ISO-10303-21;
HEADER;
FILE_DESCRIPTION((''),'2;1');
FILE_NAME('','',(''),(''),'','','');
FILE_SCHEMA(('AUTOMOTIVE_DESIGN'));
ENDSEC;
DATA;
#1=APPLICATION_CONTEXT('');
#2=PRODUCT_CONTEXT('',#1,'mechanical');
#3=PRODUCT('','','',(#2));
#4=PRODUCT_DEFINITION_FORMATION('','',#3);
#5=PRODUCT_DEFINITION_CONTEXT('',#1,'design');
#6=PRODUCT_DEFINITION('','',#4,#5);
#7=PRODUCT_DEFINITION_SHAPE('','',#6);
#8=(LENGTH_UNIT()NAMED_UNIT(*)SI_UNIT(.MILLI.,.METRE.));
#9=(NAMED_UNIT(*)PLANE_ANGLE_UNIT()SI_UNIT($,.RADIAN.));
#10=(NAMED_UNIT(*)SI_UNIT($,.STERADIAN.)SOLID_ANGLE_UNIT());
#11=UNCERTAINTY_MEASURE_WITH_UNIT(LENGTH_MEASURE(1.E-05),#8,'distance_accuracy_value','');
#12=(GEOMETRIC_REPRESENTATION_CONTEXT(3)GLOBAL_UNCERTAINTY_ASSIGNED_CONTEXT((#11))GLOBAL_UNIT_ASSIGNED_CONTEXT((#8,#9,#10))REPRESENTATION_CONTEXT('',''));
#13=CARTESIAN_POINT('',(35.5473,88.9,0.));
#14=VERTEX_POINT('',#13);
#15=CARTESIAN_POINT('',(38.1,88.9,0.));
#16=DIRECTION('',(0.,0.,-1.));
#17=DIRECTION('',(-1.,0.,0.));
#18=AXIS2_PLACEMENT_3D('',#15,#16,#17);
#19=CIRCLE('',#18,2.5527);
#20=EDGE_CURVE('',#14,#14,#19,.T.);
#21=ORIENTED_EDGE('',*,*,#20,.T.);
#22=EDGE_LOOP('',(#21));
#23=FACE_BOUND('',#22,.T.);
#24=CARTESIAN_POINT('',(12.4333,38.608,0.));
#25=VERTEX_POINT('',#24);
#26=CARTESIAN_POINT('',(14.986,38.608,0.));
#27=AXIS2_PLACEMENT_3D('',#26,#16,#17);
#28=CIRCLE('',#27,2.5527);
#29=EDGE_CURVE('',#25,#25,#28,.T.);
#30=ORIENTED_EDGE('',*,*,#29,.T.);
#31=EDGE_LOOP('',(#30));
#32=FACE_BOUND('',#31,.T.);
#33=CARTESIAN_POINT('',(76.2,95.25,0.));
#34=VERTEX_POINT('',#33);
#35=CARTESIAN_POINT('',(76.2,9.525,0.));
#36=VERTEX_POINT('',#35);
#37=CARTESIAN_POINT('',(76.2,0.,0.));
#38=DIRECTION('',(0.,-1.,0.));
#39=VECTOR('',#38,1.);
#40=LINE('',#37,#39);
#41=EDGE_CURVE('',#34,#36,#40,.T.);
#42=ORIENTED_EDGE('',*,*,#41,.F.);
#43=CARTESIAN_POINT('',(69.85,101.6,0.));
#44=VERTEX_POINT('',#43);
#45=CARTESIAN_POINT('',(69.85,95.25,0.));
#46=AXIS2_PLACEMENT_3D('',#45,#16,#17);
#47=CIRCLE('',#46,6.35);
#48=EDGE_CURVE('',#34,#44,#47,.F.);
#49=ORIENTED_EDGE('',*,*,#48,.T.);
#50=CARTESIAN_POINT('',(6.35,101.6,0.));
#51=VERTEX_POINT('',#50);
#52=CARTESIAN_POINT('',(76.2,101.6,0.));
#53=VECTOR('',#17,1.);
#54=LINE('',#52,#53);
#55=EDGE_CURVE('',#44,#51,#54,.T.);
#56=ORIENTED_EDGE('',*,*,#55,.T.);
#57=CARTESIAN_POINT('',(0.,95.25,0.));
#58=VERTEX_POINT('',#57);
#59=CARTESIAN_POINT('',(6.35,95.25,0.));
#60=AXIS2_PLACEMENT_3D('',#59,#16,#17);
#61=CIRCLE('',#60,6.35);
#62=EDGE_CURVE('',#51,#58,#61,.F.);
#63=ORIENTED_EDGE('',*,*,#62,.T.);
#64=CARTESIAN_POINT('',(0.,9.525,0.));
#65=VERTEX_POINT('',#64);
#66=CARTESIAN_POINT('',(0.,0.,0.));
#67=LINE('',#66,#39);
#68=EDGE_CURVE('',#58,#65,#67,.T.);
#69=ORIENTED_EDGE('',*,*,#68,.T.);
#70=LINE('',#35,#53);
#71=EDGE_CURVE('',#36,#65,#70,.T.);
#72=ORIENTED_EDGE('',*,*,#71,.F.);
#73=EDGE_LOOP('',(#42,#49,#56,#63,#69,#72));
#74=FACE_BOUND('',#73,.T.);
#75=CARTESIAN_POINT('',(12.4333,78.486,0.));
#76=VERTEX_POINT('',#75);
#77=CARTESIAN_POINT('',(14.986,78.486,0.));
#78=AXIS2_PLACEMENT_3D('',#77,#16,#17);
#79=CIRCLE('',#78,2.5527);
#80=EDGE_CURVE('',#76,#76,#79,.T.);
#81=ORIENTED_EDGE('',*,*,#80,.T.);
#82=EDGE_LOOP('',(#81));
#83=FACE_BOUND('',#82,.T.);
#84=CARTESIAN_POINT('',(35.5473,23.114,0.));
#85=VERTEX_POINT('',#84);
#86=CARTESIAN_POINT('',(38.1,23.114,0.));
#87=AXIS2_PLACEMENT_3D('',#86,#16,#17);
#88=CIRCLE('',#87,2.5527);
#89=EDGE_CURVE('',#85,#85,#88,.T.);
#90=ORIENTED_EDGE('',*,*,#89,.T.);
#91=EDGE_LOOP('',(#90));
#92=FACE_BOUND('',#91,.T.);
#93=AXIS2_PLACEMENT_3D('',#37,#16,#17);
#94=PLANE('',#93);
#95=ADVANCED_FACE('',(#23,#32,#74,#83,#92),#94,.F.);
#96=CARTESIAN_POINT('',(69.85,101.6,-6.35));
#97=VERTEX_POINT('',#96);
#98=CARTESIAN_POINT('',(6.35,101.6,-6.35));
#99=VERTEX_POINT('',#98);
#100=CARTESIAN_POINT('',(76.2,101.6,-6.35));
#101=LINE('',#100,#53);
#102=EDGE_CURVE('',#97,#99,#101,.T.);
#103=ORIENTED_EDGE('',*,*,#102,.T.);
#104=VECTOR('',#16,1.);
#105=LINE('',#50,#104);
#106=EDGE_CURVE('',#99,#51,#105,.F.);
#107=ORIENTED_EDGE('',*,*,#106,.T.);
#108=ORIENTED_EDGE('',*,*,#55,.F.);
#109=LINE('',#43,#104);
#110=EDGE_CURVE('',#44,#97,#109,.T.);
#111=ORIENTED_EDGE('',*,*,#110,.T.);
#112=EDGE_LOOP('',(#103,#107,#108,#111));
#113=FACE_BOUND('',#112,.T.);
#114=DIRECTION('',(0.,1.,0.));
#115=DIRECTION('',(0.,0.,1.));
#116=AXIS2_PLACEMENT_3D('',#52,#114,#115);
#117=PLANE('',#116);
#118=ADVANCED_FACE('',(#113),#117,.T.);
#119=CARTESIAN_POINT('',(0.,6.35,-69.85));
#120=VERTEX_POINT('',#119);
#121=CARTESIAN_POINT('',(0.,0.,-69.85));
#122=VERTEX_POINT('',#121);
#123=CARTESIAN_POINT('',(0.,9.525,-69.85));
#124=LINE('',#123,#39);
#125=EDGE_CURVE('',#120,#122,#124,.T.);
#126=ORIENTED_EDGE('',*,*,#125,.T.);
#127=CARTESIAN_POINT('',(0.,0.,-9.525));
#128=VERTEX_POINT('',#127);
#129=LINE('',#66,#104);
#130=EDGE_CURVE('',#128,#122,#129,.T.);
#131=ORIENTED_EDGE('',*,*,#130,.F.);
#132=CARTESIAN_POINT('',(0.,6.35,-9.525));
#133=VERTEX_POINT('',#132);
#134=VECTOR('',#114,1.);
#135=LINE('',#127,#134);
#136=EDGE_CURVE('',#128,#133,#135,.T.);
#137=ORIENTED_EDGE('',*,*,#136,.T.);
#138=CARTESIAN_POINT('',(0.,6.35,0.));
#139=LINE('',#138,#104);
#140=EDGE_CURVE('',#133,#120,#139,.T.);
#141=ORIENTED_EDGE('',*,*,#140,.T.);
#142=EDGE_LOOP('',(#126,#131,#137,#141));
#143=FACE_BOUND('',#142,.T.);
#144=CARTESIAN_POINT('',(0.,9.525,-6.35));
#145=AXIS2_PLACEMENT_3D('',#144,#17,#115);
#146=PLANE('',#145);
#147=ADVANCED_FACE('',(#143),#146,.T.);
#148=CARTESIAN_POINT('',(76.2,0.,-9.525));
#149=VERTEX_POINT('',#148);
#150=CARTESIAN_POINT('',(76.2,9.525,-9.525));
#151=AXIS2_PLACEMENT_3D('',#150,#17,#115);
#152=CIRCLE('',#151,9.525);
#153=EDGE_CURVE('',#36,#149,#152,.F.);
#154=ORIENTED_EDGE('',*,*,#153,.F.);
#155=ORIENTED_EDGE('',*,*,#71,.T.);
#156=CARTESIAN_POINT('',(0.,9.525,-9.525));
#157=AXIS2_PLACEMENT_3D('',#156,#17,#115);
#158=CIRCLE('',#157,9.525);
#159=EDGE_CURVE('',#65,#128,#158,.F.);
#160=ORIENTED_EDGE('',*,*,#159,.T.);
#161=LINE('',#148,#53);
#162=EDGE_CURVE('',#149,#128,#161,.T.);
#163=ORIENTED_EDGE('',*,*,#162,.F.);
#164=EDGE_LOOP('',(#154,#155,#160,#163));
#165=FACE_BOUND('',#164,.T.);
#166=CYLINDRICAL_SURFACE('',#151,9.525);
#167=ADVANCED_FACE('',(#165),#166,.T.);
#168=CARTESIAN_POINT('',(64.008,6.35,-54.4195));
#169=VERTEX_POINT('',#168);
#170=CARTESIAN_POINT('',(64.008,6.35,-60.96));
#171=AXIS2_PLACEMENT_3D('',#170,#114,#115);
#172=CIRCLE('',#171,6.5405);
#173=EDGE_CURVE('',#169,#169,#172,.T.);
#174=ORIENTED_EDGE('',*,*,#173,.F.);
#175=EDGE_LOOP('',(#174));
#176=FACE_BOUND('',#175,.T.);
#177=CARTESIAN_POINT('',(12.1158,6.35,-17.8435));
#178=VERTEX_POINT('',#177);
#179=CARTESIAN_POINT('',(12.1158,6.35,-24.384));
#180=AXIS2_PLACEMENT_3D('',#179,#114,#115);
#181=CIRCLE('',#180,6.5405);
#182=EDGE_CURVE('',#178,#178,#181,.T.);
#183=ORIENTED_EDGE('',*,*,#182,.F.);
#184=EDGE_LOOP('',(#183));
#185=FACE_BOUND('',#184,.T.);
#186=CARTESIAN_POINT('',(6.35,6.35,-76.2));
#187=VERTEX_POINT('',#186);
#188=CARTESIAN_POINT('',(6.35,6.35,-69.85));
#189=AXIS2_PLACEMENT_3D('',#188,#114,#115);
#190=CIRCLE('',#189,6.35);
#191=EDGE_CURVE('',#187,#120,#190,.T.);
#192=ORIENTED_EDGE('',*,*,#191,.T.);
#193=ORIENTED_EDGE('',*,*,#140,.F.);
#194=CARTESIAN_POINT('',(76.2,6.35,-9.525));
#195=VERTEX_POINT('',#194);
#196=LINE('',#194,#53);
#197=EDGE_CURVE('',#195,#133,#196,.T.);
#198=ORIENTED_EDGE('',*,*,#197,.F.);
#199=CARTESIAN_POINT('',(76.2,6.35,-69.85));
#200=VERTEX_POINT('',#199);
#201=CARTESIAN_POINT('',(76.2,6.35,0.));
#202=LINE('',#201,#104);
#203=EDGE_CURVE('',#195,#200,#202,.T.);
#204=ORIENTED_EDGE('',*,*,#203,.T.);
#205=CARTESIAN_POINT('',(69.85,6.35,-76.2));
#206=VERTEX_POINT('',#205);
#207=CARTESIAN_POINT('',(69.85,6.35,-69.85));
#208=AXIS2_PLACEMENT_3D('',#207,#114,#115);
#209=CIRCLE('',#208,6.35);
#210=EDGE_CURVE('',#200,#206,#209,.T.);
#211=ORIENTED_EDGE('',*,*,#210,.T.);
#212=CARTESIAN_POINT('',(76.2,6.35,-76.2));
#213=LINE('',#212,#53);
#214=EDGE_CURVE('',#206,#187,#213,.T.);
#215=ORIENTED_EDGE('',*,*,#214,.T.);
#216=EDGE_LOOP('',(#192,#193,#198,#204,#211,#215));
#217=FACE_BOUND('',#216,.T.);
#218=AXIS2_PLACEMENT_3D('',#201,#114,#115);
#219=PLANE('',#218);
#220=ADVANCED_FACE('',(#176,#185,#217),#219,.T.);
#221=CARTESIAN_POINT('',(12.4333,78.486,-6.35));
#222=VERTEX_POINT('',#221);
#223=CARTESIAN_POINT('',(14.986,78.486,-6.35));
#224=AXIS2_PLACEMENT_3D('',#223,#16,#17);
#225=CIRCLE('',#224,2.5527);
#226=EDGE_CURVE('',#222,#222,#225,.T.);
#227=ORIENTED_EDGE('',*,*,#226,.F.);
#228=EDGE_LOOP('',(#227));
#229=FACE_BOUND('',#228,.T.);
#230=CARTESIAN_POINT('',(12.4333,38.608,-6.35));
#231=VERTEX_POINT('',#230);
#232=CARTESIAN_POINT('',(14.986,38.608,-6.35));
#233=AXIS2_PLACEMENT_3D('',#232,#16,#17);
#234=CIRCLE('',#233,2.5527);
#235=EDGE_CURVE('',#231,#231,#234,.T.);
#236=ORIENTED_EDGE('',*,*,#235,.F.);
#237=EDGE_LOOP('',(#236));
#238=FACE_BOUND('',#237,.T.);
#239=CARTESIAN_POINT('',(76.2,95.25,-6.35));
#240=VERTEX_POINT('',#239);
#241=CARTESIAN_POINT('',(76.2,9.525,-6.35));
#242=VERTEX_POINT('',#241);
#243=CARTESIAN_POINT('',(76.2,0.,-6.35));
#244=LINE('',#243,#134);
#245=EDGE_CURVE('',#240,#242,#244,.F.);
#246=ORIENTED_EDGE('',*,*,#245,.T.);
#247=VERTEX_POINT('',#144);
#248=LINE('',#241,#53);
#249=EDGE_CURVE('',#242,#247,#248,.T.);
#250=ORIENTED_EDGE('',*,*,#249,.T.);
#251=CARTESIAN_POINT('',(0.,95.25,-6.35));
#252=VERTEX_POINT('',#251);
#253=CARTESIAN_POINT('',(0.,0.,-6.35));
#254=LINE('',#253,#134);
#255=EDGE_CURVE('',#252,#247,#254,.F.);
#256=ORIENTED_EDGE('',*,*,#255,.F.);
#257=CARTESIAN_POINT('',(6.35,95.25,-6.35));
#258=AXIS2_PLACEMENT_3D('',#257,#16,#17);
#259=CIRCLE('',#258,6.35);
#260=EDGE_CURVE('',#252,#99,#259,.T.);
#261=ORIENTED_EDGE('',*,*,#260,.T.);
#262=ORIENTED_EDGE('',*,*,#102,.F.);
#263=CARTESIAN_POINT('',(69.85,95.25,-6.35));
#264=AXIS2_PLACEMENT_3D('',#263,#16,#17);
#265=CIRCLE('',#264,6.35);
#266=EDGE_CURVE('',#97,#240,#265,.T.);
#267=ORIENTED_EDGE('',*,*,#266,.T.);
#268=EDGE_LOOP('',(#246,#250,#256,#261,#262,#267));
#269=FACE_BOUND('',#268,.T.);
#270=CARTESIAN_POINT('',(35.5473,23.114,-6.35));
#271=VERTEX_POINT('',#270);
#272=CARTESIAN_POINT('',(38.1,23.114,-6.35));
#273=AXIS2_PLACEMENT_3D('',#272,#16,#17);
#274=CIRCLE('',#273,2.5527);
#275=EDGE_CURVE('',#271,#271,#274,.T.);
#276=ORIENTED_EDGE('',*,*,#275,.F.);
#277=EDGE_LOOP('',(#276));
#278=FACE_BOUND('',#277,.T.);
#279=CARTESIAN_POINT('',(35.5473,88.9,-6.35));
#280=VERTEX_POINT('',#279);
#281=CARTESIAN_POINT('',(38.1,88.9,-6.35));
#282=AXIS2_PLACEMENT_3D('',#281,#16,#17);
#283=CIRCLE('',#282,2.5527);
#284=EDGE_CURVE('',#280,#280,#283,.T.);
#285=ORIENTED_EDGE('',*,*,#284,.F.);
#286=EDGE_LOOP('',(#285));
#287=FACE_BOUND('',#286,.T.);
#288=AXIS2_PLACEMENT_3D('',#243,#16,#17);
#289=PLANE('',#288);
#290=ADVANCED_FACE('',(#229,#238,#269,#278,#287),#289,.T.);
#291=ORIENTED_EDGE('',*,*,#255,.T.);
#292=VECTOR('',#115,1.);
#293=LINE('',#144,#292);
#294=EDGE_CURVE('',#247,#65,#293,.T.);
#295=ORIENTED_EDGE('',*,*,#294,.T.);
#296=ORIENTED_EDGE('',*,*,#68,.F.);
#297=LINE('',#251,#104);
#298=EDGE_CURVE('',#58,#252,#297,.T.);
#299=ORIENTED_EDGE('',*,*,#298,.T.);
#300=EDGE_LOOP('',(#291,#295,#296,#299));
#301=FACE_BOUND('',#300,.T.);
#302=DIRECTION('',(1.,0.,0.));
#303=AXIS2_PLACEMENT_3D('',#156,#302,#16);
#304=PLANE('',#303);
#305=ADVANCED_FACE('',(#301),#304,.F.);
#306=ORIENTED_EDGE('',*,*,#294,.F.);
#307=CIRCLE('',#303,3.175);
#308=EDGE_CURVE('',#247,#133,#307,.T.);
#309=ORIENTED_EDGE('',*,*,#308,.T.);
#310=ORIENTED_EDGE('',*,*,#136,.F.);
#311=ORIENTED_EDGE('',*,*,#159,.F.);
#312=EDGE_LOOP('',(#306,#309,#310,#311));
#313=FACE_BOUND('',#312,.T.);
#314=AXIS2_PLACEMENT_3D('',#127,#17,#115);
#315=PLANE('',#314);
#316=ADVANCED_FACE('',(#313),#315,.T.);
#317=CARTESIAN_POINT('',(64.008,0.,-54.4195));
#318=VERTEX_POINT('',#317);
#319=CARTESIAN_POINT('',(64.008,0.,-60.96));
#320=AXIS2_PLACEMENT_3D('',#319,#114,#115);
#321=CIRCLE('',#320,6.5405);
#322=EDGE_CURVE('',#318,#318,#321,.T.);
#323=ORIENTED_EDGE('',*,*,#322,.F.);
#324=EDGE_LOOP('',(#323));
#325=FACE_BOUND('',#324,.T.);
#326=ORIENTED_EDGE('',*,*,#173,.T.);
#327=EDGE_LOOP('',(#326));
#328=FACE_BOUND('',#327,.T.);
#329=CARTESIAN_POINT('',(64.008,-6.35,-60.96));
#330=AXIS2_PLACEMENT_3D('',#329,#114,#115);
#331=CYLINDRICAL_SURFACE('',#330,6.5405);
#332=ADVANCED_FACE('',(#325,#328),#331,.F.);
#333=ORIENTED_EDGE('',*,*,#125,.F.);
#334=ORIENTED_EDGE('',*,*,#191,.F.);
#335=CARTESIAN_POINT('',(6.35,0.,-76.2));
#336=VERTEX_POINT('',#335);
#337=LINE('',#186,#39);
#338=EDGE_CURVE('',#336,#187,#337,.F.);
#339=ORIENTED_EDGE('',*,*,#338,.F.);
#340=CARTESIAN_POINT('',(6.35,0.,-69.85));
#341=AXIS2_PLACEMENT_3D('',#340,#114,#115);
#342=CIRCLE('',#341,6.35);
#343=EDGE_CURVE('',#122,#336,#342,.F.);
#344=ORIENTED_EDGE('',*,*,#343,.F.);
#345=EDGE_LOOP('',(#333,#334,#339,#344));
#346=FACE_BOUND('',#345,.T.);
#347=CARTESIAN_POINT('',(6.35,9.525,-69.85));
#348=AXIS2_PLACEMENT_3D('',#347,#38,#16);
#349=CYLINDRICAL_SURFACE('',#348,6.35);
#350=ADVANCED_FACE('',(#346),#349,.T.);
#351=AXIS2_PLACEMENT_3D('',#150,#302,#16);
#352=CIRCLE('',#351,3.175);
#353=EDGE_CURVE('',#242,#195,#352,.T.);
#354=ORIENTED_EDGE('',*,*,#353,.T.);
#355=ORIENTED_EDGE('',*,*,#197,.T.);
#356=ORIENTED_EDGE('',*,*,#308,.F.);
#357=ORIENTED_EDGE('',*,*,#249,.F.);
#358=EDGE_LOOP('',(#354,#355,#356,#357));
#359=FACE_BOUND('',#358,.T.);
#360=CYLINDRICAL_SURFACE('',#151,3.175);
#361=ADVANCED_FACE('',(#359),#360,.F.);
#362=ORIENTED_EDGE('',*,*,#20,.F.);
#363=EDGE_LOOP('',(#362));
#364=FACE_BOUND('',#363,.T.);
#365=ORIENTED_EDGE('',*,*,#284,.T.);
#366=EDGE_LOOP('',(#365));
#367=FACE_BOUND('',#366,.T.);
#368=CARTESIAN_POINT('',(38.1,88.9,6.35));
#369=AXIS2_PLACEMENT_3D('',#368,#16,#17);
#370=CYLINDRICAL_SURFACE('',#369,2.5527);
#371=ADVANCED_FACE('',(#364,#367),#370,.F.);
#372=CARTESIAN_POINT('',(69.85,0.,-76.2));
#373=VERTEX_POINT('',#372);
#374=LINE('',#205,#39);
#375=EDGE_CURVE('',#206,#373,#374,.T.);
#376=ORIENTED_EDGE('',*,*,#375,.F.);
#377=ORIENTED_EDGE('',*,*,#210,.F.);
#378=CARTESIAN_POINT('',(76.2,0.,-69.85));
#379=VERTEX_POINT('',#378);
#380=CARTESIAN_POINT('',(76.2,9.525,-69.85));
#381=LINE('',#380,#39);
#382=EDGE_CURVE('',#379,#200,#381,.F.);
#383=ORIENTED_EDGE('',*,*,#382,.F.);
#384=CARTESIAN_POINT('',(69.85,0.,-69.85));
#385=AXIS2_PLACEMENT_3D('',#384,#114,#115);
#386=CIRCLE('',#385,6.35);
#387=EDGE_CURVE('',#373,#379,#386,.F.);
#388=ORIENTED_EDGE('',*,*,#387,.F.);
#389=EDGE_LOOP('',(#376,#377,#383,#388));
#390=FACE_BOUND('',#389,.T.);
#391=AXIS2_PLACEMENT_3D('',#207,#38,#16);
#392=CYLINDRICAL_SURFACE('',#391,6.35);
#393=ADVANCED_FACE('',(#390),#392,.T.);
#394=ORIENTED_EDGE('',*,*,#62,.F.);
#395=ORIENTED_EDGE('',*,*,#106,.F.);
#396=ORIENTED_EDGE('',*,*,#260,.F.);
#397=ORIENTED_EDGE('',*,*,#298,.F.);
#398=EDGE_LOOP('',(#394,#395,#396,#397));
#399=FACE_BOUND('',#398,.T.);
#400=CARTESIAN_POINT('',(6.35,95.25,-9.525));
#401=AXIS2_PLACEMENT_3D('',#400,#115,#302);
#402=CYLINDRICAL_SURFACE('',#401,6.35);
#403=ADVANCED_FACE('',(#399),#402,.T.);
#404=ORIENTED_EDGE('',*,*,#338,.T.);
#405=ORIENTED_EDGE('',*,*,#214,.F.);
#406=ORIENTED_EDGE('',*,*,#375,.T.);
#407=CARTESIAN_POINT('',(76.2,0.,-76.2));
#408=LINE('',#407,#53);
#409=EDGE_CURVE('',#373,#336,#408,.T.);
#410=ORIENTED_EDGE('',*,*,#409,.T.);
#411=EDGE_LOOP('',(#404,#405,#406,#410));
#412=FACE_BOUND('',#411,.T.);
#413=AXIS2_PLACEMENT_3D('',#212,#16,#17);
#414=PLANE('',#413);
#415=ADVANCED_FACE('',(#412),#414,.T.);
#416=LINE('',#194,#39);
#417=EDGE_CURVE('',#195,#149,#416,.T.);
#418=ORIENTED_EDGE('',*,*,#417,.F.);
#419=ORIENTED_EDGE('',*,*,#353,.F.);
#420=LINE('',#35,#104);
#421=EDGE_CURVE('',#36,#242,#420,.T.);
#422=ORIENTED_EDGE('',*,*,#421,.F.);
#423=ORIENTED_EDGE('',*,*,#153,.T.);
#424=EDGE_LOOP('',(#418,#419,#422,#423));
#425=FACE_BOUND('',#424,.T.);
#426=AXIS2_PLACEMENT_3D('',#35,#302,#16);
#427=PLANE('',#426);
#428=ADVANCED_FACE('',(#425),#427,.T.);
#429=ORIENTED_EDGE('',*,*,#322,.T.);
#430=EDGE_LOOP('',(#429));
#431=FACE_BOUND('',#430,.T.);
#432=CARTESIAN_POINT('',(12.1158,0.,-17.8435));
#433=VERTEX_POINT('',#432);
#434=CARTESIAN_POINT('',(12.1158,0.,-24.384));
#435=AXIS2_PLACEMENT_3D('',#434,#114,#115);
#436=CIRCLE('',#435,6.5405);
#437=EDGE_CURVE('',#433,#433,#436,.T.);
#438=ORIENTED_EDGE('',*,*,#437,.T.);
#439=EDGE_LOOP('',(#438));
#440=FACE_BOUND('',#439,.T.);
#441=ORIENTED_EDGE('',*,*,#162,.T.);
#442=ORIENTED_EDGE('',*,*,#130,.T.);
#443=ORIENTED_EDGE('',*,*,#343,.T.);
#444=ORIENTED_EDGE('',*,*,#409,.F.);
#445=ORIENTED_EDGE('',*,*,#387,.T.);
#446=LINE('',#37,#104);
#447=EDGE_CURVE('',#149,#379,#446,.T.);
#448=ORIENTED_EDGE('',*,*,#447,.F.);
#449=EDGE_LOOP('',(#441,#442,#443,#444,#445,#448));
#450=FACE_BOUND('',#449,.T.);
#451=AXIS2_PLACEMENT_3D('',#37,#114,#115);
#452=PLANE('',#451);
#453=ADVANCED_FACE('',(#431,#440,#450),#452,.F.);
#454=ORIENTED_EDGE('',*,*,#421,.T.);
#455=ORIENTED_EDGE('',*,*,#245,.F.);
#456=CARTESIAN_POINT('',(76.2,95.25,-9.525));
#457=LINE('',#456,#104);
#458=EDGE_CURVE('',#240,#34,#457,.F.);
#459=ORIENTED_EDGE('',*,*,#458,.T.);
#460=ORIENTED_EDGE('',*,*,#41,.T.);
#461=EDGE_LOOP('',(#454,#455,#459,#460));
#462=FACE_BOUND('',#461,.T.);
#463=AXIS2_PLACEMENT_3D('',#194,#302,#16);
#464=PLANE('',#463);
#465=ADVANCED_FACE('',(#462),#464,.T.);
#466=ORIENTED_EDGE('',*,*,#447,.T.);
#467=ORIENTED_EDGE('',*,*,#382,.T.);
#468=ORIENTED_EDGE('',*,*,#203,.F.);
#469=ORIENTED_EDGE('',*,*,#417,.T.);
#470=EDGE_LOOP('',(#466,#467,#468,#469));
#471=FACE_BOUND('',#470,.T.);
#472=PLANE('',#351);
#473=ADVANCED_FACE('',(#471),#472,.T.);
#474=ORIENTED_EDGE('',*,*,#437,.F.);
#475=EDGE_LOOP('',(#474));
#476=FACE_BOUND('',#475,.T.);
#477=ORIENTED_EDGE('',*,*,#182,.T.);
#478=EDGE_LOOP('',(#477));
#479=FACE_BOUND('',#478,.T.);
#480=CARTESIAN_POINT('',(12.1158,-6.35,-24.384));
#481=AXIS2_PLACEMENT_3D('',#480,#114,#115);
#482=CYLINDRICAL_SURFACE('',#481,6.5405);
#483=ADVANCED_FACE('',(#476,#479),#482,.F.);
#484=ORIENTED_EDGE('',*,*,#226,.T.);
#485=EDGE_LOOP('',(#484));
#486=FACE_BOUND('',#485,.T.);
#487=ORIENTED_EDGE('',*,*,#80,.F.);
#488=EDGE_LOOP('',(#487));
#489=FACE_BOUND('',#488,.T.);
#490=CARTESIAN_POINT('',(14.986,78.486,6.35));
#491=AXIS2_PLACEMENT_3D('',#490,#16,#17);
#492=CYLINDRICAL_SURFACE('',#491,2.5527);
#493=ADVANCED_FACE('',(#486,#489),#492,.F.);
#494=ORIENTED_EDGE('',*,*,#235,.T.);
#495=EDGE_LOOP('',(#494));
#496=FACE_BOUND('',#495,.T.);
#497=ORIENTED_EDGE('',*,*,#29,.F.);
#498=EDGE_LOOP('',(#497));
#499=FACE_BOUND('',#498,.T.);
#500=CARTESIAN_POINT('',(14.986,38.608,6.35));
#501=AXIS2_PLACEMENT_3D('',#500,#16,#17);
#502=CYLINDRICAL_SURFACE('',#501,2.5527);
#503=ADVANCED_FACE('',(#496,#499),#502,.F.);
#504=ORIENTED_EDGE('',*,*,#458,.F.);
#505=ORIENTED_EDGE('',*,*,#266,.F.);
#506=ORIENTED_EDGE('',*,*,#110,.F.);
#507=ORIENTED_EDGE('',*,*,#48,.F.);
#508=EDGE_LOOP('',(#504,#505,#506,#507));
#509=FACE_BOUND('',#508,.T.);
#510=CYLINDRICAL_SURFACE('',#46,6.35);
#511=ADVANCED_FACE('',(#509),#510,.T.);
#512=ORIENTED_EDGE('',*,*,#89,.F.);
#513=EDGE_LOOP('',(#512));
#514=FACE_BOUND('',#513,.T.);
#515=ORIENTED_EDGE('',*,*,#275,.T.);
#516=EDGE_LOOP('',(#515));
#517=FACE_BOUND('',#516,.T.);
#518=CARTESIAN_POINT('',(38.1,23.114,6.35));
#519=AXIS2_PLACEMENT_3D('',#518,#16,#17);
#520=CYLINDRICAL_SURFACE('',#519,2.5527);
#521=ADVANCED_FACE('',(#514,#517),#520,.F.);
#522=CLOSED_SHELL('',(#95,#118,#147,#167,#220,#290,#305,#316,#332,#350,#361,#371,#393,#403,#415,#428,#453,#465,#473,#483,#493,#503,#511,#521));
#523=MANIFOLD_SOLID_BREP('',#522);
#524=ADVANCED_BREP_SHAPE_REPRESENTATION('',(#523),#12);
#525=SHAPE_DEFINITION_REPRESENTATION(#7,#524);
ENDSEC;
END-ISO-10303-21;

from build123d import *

# Parameters (mm, degrees)
BASE_FLANGE1_DEPTH = 76.2
SKETCH3_R          = 6.5405
TAB1_DEPTH         = 6.35
SKETCH3_2_R        = 6.5405
CUT_EXTRUDE1_DEPTH = 12.7
SKETCH4_R          = 2.5527
CUT_EXTRUDE2_DEPTH = 12.7
FILLET1_R          = 6.35


# Sheet-metal steps are written as plain solids
with BuildPart() as part:
    # Sketch1 → Base-Flange1 (new body)
    with BuildSketch(Plane(origin=(0, 0, 0), x_dir=(0, 0, -1), z_dir=(1, 0, 0))):
        with BuildLine():
            Line((76.2, 0), (9.525, 0))
            ThreePointArc((9.525, 0), (2.789807909, 2.789807909), (0, 9.525))
            Line((0, 9.525), (0, 101.6))
            Line((0, 101.6), (6.35, 101.6))
            Line((6.35, 101.6), (6.35, 9.525))
            ThreePointArc((6.35, 9.525), (7.27993597, 7.27993597), (9.525, 6.35))
            Line((9.525, 6.35), (76.2, 6.35))
            Line((76.2, 6.35), (76.2, 0))
        make_face()
    extrude(amount=BASE_FLANGE1_DEPTH)

    # Sketch3 → Tab1 (add)
    with BuildSketch(Plane(origin=(0, 6.35, 0), x_dir=(-1, 0, 0), z_dir=(0, 1, 0))):
        with Locations((-12.1158, -24.384)):
            Circle(SKETCH3_R)
        with Locations((-64.008, -60.96)):
            Circle(SKETCH3_R)
    extrude(amount=-TAB1_DEPTH)

    # Sketch3<2> → Cut-Extrude1 (cut)
    with BuildSketch(Plane(origin=(0, 6.35, 0), x_dir=(-1, 0, 0), z_dir=(0, 1, 0))):
        with Locations(Location((-12.1158, -24.384, 0), (0, 0, 90))):
            Circle(SKETCH3_2_R)
        with Locations(Location((-64.008, -60.96, 0), (0, 0, 90))):
            Circle(SKETCH3_2_R)
    extrude(amount=-CUT_EXTRUDE1_DEPTH, mode=Mode.SUBTRACT)

    # Sketch4 → Cut-Extrude2 (cut)
    with BuildSketch(Plane(origin=(0, 0, -6.35), x_dir=(-1, 0, 0), z_dir=(0, 0, -1))):
        with Locations((-38.1, 88.9)):
            Circle(SKETCH4_R)
        with Locations((-38.1, 23.114)):
            Circle(SKETCH4_R)
        with Locations((-14.986, 78.486)):
            Circle(SKETCH4_R)
        with Locations((-14.986, 38.608)):
            Circle(SKETCH4_R)
    extrude(amount=-CUT_EXTRUDE2_DEPTH, mode=Mode.SUBTRACT)

    # Fillet1
    fillet1_edges = [part.edges().sort_by_distance(p)[0] for p in [
        (76.2, 101.6, -3.175),
        (0, 101.6, -3.175),
        (76.2, 3.175, -76.2),
        (0, 3.175, -76.2),
    ]]
    fillet(fillet1_edges, radius=FILLET1_R)


solid = part.part
